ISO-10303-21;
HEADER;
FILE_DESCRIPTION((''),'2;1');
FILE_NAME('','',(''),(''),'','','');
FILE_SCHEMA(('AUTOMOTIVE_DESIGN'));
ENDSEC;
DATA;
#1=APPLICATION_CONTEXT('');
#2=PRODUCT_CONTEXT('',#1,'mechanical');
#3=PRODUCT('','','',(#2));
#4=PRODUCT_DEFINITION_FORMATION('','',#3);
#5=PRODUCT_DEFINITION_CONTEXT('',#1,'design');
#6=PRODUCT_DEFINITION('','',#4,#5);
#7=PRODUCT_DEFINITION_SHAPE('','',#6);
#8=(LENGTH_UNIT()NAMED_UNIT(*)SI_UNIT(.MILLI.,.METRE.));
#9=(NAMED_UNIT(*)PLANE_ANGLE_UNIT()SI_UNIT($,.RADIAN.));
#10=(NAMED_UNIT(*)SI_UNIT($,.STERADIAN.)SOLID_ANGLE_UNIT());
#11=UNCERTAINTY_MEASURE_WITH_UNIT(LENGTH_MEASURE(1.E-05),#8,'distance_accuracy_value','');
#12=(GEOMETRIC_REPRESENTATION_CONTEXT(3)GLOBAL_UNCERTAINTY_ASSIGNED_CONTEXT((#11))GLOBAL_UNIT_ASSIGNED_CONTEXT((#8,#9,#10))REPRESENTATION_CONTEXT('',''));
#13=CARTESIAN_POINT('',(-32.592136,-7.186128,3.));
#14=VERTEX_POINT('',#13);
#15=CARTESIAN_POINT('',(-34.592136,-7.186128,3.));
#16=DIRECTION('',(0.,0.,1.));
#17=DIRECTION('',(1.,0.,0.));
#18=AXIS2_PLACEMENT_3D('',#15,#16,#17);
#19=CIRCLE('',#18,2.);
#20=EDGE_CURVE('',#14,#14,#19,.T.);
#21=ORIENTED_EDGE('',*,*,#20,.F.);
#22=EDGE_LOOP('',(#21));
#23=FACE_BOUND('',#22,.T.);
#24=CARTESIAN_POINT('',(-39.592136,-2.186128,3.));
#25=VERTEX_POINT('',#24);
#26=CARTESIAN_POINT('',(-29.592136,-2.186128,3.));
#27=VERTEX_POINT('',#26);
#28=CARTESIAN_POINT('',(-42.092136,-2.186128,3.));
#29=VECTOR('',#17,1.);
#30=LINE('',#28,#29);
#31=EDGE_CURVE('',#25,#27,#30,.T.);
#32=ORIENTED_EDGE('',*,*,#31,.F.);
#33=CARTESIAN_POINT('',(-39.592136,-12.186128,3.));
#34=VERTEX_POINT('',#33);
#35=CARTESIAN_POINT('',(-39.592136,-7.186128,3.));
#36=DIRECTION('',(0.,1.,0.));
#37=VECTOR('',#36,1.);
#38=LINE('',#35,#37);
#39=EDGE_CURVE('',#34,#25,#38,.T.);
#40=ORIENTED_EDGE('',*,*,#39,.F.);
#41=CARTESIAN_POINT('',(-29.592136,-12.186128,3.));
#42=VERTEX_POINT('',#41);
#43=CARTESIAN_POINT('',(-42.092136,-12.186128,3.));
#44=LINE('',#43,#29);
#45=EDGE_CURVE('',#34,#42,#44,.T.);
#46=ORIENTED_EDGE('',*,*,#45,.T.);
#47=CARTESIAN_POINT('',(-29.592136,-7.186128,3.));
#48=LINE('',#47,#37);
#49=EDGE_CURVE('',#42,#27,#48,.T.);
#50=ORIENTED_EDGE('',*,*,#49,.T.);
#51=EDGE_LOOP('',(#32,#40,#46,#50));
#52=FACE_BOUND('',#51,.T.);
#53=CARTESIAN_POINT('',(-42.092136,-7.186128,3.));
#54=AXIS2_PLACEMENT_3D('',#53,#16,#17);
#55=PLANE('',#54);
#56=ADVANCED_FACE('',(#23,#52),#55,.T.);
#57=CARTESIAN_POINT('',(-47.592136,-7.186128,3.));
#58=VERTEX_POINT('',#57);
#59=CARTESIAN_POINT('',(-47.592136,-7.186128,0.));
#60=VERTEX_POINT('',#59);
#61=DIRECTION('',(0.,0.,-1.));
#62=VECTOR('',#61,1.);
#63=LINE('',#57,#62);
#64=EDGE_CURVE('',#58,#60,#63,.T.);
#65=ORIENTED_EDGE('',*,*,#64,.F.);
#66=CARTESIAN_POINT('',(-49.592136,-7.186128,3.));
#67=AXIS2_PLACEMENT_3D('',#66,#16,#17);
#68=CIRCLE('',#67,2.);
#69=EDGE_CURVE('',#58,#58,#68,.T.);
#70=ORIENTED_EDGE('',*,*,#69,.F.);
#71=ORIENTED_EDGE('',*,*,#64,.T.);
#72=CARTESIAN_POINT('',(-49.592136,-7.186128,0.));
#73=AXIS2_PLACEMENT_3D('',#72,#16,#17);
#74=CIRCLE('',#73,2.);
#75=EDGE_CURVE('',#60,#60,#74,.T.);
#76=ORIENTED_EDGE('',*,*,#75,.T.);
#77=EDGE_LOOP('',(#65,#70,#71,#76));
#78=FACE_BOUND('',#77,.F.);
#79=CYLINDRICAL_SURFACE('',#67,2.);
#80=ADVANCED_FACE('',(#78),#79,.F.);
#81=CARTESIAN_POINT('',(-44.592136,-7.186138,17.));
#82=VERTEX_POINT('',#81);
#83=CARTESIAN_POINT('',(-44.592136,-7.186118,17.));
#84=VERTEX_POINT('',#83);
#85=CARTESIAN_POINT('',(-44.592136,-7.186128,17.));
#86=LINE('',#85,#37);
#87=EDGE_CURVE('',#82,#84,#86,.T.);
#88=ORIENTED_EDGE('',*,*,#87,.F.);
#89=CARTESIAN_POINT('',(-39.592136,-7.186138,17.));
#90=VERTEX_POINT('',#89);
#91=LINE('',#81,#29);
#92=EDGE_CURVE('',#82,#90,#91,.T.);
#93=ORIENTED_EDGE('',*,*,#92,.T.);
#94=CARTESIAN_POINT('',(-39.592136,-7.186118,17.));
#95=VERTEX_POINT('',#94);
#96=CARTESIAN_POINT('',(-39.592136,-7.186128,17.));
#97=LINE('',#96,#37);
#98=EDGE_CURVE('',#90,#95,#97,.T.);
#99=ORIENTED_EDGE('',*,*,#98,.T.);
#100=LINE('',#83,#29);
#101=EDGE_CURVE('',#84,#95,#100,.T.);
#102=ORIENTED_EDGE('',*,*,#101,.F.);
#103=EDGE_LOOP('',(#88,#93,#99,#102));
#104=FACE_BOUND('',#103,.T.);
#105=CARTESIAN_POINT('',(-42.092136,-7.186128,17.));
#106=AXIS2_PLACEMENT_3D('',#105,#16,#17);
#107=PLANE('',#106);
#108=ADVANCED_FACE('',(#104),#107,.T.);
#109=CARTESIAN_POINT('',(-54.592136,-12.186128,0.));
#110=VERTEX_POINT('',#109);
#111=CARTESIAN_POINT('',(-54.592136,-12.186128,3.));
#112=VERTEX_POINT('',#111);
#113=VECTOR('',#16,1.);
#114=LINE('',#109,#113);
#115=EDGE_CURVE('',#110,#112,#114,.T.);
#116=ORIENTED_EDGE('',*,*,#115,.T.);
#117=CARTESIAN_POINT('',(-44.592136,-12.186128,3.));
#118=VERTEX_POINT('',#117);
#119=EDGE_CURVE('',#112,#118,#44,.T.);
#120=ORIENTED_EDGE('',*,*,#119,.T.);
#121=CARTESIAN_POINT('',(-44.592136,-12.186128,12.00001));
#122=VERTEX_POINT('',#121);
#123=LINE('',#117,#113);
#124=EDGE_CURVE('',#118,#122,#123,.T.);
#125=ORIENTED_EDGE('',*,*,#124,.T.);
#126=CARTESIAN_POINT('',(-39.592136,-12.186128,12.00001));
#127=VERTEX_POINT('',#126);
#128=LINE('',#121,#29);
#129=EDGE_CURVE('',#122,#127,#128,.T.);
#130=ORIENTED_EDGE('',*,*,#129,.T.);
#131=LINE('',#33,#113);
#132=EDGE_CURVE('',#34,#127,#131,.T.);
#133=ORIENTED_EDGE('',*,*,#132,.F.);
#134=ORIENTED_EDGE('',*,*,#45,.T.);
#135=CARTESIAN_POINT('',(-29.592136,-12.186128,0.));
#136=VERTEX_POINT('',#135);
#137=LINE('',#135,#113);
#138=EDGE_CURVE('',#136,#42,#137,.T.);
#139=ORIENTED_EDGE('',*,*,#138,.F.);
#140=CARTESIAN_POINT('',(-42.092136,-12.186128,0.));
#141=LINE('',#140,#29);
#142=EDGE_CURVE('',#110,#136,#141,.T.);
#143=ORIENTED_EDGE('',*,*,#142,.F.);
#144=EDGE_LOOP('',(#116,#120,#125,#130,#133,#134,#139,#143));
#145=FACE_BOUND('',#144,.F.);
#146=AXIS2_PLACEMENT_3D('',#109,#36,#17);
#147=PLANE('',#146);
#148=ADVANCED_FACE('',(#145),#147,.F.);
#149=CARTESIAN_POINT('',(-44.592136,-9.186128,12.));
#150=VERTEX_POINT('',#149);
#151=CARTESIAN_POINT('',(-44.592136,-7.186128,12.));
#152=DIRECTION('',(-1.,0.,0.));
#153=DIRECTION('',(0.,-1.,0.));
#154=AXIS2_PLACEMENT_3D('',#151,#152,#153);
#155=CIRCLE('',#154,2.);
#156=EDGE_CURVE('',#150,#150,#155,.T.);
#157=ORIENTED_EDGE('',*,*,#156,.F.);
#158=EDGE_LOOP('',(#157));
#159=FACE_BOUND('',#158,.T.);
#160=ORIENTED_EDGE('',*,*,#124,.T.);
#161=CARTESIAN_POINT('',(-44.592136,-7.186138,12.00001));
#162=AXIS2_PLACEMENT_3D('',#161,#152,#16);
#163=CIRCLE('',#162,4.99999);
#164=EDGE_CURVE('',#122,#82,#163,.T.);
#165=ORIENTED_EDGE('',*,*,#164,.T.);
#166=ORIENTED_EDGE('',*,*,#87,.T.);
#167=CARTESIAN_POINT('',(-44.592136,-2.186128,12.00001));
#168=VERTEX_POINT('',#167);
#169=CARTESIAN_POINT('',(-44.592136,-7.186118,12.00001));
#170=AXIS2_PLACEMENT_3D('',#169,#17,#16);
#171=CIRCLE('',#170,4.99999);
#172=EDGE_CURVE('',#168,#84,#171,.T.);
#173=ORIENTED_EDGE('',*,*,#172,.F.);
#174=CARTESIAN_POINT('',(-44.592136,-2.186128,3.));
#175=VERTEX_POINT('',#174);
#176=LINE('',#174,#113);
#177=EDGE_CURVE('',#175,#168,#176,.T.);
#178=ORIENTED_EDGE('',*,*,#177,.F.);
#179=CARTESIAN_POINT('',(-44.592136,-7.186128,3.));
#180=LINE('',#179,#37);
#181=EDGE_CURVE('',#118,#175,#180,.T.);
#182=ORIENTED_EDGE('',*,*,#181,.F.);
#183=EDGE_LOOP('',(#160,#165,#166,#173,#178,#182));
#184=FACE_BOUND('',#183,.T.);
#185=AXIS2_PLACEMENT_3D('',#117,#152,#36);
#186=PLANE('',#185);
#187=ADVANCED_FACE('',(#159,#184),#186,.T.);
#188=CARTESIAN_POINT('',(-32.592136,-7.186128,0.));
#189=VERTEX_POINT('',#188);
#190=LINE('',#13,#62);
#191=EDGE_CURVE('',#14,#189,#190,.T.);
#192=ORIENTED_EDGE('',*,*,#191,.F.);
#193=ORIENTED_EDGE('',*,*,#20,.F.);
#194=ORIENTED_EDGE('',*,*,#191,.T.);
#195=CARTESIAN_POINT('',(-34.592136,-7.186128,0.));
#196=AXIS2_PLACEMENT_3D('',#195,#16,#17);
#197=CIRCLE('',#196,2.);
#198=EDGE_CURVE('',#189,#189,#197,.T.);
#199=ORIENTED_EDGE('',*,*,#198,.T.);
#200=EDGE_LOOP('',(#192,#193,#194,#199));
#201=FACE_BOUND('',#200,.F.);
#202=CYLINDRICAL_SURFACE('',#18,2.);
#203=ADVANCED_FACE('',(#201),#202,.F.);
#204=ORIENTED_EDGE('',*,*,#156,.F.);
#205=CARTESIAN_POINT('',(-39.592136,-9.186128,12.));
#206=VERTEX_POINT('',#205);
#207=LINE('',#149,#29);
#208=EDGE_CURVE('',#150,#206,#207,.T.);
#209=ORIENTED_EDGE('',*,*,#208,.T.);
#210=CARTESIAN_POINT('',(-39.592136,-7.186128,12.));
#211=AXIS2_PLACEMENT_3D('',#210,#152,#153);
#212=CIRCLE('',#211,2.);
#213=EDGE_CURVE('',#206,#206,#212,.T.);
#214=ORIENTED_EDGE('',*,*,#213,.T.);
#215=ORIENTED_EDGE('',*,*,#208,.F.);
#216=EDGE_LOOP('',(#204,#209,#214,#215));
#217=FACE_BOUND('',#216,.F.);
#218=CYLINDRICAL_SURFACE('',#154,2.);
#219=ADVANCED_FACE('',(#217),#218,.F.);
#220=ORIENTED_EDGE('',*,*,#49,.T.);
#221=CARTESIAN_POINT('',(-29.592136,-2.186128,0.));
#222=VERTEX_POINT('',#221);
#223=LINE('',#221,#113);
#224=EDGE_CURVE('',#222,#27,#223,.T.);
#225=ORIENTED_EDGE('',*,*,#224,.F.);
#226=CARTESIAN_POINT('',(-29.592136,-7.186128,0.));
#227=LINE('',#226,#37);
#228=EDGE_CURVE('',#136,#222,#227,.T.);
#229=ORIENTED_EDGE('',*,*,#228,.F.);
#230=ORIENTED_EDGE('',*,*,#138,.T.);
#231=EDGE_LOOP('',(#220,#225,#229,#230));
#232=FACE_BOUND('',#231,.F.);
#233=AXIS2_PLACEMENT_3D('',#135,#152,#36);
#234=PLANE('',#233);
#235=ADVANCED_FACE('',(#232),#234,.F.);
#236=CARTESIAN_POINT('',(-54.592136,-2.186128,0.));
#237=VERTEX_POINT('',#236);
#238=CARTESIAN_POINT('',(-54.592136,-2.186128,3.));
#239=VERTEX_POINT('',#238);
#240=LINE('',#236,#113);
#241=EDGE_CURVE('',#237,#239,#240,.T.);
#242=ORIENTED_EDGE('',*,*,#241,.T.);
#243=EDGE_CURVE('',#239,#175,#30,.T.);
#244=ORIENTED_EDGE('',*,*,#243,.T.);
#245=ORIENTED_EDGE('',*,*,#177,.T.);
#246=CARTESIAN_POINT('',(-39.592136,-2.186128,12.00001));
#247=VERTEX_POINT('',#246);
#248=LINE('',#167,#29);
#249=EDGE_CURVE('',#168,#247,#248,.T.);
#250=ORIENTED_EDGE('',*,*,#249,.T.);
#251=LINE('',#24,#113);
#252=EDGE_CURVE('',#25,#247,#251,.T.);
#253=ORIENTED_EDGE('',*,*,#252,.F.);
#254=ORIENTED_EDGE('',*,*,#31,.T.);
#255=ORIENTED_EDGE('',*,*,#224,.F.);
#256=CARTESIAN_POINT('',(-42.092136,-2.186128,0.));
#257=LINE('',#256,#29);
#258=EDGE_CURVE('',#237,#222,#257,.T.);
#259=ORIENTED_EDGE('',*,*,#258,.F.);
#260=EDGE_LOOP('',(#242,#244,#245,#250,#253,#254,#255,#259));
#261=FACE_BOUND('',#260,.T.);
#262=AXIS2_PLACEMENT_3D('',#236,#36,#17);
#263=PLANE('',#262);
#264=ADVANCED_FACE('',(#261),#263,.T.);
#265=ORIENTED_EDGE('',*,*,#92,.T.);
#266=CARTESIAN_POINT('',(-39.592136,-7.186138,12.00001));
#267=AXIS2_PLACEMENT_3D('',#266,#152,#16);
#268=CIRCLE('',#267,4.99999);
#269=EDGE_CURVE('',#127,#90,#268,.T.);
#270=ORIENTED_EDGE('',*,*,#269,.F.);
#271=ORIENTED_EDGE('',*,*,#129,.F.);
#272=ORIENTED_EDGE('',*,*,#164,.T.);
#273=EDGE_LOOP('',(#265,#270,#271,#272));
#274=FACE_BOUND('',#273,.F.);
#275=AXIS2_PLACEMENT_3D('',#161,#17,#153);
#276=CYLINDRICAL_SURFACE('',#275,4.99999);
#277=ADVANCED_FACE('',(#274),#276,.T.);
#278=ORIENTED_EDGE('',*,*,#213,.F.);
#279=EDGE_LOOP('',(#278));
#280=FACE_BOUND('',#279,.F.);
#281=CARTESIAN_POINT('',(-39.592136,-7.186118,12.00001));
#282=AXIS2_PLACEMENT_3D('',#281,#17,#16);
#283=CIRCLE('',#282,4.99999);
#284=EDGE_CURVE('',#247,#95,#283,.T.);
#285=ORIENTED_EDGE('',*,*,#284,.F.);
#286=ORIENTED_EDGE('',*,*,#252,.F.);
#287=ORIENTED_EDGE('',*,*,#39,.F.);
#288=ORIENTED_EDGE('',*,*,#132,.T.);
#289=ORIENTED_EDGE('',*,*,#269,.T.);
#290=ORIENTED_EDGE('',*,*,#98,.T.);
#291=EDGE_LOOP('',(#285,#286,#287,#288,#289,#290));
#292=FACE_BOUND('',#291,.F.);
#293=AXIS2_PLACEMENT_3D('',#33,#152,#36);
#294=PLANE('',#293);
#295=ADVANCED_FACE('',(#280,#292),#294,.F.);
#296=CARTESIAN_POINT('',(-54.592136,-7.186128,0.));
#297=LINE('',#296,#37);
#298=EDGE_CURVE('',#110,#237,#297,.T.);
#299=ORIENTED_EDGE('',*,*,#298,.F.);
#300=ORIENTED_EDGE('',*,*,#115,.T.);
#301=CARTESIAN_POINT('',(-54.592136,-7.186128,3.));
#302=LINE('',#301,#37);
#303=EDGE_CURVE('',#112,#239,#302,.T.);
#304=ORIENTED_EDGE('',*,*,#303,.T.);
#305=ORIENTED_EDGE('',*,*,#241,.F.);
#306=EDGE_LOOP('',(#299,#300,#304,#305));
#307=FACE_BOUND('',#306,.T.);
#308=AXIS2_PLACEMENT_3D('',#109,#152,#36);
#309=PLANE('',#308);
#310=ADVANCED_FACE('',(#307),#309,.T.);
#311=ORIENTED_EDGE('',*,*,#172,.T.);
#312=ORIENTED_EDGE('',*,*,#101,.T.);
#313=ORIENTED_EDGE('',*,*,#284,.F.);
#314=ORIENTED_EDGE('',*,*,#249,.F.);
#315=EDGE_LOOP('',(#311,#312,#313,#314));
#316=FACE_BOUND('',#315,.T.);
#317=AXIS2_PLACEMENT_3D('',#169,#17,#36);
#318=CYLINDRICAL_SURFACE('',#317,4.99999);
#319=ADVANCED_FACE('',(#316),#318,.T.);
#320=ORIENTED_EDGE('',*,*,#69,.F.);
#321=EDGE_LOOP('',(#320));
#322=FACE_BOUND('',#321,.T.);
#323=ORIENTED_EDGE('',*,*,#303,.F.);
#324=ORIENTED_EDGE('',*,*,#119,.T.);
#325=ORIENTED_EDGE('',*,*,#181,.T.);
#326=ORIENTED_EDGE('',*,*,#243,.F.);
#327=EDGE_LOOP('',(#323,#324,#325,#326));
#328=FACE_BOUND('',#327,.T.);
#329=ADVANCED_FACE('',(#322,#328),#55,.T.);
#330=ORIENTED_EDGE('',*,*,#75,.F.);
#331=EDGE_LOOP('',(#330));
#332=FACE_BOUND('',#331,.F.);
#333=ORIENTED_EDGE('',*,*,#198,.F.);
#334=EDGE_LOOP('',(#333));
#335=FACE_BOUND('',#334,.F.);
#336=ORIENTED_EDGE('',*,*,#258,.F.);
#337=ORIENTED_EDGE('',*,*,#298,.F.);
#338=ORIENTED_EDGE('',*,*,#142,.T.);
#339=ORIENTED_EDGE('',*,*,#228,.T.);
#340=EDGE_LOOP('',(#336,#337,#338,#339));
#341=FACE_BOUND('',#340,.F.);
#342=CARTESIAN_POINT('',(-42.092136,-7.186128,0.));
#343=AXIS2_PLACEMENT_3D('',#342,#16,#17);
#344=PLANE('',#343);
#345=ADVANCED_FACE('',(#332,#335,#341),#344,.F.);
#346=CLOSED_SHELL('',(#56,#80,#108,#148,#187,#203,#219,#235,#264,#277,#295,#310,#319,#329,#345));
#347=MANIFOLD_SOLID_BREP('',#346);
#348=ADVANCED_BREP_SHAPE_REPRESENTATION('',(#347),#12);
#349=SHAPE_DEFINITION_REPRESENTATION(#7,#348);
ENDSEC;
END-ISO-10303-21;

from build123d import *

# Parameters (mm, degrees)
F0_W     = 25
F0_H     = 10
F1_DEPTH = 3
F2_W     = 5
F2_H     = 10
F3_DEPTH = 14
F5_R     = 4.99999
F4_R     = 2
F7_DEPTH = 3
F6_R     = 2
F8_DEPTH = 5


# Not quite as in the source:
# - a fillet or chamfer is up to 0.001 mm smaller than in the source, because OpenCascade refuses the exact size


with BuildPart() as f1:
    # F0 (on Top) → F1 (new body)
    with BuildSketch(Plane.XY):
        with Locations((-42.0921362936, -7.1861277148)):
            Rectangle(F0_W, F0_H)
    extrude(amount=F1_DEPTH)

    # F2 (on face) → F3 (join)
    with BuildSketch(Plane.XY.offset(3)):
        with Locations((-42.0921362936, -7.1861277148)):
            Rectangle(F2_W, F2_H)
    extrude(amount=F3_DEPTH)

    # F5 (radius 5 in the source; OpenCascade refuses exactly that, so slightly less here)
    f5_edges = [f1.edges().sort_by_distance(p)[0] for p in [
        (-42.092136, -12.186128, 17),
        (-42.092136, -2.186128, 17),
    ]]
    fillet(f5_edges, radius=F5_R)

    # F4 (on face) → F7 (cut)
    with BuildSketch(Plane.XY.offset(3)):
        with Locations((-49.5921362936, -7.1861277148)):
            Circle(F4_R)
        with Locations((-34.5921362936, -7.1861277148)):
            Circle(F4_R)
    extrude(amount=-F7_DEPTH, mode=Mode.SUBTRACT)

    # F6 (on face) → F8 (cut)
    with BuildSketch(Plane(origin=(-44.5921362936, 0, 0), x_dir=(0, -1, 0), z_dir=(-1, 0, 0))):
        with Locations((7.1861277148, 12)):
            Circle(F6_R)
    extrude(amount=-F8_DEPTH, mode=Mode.SUBTRACT)


solid = f1.part
